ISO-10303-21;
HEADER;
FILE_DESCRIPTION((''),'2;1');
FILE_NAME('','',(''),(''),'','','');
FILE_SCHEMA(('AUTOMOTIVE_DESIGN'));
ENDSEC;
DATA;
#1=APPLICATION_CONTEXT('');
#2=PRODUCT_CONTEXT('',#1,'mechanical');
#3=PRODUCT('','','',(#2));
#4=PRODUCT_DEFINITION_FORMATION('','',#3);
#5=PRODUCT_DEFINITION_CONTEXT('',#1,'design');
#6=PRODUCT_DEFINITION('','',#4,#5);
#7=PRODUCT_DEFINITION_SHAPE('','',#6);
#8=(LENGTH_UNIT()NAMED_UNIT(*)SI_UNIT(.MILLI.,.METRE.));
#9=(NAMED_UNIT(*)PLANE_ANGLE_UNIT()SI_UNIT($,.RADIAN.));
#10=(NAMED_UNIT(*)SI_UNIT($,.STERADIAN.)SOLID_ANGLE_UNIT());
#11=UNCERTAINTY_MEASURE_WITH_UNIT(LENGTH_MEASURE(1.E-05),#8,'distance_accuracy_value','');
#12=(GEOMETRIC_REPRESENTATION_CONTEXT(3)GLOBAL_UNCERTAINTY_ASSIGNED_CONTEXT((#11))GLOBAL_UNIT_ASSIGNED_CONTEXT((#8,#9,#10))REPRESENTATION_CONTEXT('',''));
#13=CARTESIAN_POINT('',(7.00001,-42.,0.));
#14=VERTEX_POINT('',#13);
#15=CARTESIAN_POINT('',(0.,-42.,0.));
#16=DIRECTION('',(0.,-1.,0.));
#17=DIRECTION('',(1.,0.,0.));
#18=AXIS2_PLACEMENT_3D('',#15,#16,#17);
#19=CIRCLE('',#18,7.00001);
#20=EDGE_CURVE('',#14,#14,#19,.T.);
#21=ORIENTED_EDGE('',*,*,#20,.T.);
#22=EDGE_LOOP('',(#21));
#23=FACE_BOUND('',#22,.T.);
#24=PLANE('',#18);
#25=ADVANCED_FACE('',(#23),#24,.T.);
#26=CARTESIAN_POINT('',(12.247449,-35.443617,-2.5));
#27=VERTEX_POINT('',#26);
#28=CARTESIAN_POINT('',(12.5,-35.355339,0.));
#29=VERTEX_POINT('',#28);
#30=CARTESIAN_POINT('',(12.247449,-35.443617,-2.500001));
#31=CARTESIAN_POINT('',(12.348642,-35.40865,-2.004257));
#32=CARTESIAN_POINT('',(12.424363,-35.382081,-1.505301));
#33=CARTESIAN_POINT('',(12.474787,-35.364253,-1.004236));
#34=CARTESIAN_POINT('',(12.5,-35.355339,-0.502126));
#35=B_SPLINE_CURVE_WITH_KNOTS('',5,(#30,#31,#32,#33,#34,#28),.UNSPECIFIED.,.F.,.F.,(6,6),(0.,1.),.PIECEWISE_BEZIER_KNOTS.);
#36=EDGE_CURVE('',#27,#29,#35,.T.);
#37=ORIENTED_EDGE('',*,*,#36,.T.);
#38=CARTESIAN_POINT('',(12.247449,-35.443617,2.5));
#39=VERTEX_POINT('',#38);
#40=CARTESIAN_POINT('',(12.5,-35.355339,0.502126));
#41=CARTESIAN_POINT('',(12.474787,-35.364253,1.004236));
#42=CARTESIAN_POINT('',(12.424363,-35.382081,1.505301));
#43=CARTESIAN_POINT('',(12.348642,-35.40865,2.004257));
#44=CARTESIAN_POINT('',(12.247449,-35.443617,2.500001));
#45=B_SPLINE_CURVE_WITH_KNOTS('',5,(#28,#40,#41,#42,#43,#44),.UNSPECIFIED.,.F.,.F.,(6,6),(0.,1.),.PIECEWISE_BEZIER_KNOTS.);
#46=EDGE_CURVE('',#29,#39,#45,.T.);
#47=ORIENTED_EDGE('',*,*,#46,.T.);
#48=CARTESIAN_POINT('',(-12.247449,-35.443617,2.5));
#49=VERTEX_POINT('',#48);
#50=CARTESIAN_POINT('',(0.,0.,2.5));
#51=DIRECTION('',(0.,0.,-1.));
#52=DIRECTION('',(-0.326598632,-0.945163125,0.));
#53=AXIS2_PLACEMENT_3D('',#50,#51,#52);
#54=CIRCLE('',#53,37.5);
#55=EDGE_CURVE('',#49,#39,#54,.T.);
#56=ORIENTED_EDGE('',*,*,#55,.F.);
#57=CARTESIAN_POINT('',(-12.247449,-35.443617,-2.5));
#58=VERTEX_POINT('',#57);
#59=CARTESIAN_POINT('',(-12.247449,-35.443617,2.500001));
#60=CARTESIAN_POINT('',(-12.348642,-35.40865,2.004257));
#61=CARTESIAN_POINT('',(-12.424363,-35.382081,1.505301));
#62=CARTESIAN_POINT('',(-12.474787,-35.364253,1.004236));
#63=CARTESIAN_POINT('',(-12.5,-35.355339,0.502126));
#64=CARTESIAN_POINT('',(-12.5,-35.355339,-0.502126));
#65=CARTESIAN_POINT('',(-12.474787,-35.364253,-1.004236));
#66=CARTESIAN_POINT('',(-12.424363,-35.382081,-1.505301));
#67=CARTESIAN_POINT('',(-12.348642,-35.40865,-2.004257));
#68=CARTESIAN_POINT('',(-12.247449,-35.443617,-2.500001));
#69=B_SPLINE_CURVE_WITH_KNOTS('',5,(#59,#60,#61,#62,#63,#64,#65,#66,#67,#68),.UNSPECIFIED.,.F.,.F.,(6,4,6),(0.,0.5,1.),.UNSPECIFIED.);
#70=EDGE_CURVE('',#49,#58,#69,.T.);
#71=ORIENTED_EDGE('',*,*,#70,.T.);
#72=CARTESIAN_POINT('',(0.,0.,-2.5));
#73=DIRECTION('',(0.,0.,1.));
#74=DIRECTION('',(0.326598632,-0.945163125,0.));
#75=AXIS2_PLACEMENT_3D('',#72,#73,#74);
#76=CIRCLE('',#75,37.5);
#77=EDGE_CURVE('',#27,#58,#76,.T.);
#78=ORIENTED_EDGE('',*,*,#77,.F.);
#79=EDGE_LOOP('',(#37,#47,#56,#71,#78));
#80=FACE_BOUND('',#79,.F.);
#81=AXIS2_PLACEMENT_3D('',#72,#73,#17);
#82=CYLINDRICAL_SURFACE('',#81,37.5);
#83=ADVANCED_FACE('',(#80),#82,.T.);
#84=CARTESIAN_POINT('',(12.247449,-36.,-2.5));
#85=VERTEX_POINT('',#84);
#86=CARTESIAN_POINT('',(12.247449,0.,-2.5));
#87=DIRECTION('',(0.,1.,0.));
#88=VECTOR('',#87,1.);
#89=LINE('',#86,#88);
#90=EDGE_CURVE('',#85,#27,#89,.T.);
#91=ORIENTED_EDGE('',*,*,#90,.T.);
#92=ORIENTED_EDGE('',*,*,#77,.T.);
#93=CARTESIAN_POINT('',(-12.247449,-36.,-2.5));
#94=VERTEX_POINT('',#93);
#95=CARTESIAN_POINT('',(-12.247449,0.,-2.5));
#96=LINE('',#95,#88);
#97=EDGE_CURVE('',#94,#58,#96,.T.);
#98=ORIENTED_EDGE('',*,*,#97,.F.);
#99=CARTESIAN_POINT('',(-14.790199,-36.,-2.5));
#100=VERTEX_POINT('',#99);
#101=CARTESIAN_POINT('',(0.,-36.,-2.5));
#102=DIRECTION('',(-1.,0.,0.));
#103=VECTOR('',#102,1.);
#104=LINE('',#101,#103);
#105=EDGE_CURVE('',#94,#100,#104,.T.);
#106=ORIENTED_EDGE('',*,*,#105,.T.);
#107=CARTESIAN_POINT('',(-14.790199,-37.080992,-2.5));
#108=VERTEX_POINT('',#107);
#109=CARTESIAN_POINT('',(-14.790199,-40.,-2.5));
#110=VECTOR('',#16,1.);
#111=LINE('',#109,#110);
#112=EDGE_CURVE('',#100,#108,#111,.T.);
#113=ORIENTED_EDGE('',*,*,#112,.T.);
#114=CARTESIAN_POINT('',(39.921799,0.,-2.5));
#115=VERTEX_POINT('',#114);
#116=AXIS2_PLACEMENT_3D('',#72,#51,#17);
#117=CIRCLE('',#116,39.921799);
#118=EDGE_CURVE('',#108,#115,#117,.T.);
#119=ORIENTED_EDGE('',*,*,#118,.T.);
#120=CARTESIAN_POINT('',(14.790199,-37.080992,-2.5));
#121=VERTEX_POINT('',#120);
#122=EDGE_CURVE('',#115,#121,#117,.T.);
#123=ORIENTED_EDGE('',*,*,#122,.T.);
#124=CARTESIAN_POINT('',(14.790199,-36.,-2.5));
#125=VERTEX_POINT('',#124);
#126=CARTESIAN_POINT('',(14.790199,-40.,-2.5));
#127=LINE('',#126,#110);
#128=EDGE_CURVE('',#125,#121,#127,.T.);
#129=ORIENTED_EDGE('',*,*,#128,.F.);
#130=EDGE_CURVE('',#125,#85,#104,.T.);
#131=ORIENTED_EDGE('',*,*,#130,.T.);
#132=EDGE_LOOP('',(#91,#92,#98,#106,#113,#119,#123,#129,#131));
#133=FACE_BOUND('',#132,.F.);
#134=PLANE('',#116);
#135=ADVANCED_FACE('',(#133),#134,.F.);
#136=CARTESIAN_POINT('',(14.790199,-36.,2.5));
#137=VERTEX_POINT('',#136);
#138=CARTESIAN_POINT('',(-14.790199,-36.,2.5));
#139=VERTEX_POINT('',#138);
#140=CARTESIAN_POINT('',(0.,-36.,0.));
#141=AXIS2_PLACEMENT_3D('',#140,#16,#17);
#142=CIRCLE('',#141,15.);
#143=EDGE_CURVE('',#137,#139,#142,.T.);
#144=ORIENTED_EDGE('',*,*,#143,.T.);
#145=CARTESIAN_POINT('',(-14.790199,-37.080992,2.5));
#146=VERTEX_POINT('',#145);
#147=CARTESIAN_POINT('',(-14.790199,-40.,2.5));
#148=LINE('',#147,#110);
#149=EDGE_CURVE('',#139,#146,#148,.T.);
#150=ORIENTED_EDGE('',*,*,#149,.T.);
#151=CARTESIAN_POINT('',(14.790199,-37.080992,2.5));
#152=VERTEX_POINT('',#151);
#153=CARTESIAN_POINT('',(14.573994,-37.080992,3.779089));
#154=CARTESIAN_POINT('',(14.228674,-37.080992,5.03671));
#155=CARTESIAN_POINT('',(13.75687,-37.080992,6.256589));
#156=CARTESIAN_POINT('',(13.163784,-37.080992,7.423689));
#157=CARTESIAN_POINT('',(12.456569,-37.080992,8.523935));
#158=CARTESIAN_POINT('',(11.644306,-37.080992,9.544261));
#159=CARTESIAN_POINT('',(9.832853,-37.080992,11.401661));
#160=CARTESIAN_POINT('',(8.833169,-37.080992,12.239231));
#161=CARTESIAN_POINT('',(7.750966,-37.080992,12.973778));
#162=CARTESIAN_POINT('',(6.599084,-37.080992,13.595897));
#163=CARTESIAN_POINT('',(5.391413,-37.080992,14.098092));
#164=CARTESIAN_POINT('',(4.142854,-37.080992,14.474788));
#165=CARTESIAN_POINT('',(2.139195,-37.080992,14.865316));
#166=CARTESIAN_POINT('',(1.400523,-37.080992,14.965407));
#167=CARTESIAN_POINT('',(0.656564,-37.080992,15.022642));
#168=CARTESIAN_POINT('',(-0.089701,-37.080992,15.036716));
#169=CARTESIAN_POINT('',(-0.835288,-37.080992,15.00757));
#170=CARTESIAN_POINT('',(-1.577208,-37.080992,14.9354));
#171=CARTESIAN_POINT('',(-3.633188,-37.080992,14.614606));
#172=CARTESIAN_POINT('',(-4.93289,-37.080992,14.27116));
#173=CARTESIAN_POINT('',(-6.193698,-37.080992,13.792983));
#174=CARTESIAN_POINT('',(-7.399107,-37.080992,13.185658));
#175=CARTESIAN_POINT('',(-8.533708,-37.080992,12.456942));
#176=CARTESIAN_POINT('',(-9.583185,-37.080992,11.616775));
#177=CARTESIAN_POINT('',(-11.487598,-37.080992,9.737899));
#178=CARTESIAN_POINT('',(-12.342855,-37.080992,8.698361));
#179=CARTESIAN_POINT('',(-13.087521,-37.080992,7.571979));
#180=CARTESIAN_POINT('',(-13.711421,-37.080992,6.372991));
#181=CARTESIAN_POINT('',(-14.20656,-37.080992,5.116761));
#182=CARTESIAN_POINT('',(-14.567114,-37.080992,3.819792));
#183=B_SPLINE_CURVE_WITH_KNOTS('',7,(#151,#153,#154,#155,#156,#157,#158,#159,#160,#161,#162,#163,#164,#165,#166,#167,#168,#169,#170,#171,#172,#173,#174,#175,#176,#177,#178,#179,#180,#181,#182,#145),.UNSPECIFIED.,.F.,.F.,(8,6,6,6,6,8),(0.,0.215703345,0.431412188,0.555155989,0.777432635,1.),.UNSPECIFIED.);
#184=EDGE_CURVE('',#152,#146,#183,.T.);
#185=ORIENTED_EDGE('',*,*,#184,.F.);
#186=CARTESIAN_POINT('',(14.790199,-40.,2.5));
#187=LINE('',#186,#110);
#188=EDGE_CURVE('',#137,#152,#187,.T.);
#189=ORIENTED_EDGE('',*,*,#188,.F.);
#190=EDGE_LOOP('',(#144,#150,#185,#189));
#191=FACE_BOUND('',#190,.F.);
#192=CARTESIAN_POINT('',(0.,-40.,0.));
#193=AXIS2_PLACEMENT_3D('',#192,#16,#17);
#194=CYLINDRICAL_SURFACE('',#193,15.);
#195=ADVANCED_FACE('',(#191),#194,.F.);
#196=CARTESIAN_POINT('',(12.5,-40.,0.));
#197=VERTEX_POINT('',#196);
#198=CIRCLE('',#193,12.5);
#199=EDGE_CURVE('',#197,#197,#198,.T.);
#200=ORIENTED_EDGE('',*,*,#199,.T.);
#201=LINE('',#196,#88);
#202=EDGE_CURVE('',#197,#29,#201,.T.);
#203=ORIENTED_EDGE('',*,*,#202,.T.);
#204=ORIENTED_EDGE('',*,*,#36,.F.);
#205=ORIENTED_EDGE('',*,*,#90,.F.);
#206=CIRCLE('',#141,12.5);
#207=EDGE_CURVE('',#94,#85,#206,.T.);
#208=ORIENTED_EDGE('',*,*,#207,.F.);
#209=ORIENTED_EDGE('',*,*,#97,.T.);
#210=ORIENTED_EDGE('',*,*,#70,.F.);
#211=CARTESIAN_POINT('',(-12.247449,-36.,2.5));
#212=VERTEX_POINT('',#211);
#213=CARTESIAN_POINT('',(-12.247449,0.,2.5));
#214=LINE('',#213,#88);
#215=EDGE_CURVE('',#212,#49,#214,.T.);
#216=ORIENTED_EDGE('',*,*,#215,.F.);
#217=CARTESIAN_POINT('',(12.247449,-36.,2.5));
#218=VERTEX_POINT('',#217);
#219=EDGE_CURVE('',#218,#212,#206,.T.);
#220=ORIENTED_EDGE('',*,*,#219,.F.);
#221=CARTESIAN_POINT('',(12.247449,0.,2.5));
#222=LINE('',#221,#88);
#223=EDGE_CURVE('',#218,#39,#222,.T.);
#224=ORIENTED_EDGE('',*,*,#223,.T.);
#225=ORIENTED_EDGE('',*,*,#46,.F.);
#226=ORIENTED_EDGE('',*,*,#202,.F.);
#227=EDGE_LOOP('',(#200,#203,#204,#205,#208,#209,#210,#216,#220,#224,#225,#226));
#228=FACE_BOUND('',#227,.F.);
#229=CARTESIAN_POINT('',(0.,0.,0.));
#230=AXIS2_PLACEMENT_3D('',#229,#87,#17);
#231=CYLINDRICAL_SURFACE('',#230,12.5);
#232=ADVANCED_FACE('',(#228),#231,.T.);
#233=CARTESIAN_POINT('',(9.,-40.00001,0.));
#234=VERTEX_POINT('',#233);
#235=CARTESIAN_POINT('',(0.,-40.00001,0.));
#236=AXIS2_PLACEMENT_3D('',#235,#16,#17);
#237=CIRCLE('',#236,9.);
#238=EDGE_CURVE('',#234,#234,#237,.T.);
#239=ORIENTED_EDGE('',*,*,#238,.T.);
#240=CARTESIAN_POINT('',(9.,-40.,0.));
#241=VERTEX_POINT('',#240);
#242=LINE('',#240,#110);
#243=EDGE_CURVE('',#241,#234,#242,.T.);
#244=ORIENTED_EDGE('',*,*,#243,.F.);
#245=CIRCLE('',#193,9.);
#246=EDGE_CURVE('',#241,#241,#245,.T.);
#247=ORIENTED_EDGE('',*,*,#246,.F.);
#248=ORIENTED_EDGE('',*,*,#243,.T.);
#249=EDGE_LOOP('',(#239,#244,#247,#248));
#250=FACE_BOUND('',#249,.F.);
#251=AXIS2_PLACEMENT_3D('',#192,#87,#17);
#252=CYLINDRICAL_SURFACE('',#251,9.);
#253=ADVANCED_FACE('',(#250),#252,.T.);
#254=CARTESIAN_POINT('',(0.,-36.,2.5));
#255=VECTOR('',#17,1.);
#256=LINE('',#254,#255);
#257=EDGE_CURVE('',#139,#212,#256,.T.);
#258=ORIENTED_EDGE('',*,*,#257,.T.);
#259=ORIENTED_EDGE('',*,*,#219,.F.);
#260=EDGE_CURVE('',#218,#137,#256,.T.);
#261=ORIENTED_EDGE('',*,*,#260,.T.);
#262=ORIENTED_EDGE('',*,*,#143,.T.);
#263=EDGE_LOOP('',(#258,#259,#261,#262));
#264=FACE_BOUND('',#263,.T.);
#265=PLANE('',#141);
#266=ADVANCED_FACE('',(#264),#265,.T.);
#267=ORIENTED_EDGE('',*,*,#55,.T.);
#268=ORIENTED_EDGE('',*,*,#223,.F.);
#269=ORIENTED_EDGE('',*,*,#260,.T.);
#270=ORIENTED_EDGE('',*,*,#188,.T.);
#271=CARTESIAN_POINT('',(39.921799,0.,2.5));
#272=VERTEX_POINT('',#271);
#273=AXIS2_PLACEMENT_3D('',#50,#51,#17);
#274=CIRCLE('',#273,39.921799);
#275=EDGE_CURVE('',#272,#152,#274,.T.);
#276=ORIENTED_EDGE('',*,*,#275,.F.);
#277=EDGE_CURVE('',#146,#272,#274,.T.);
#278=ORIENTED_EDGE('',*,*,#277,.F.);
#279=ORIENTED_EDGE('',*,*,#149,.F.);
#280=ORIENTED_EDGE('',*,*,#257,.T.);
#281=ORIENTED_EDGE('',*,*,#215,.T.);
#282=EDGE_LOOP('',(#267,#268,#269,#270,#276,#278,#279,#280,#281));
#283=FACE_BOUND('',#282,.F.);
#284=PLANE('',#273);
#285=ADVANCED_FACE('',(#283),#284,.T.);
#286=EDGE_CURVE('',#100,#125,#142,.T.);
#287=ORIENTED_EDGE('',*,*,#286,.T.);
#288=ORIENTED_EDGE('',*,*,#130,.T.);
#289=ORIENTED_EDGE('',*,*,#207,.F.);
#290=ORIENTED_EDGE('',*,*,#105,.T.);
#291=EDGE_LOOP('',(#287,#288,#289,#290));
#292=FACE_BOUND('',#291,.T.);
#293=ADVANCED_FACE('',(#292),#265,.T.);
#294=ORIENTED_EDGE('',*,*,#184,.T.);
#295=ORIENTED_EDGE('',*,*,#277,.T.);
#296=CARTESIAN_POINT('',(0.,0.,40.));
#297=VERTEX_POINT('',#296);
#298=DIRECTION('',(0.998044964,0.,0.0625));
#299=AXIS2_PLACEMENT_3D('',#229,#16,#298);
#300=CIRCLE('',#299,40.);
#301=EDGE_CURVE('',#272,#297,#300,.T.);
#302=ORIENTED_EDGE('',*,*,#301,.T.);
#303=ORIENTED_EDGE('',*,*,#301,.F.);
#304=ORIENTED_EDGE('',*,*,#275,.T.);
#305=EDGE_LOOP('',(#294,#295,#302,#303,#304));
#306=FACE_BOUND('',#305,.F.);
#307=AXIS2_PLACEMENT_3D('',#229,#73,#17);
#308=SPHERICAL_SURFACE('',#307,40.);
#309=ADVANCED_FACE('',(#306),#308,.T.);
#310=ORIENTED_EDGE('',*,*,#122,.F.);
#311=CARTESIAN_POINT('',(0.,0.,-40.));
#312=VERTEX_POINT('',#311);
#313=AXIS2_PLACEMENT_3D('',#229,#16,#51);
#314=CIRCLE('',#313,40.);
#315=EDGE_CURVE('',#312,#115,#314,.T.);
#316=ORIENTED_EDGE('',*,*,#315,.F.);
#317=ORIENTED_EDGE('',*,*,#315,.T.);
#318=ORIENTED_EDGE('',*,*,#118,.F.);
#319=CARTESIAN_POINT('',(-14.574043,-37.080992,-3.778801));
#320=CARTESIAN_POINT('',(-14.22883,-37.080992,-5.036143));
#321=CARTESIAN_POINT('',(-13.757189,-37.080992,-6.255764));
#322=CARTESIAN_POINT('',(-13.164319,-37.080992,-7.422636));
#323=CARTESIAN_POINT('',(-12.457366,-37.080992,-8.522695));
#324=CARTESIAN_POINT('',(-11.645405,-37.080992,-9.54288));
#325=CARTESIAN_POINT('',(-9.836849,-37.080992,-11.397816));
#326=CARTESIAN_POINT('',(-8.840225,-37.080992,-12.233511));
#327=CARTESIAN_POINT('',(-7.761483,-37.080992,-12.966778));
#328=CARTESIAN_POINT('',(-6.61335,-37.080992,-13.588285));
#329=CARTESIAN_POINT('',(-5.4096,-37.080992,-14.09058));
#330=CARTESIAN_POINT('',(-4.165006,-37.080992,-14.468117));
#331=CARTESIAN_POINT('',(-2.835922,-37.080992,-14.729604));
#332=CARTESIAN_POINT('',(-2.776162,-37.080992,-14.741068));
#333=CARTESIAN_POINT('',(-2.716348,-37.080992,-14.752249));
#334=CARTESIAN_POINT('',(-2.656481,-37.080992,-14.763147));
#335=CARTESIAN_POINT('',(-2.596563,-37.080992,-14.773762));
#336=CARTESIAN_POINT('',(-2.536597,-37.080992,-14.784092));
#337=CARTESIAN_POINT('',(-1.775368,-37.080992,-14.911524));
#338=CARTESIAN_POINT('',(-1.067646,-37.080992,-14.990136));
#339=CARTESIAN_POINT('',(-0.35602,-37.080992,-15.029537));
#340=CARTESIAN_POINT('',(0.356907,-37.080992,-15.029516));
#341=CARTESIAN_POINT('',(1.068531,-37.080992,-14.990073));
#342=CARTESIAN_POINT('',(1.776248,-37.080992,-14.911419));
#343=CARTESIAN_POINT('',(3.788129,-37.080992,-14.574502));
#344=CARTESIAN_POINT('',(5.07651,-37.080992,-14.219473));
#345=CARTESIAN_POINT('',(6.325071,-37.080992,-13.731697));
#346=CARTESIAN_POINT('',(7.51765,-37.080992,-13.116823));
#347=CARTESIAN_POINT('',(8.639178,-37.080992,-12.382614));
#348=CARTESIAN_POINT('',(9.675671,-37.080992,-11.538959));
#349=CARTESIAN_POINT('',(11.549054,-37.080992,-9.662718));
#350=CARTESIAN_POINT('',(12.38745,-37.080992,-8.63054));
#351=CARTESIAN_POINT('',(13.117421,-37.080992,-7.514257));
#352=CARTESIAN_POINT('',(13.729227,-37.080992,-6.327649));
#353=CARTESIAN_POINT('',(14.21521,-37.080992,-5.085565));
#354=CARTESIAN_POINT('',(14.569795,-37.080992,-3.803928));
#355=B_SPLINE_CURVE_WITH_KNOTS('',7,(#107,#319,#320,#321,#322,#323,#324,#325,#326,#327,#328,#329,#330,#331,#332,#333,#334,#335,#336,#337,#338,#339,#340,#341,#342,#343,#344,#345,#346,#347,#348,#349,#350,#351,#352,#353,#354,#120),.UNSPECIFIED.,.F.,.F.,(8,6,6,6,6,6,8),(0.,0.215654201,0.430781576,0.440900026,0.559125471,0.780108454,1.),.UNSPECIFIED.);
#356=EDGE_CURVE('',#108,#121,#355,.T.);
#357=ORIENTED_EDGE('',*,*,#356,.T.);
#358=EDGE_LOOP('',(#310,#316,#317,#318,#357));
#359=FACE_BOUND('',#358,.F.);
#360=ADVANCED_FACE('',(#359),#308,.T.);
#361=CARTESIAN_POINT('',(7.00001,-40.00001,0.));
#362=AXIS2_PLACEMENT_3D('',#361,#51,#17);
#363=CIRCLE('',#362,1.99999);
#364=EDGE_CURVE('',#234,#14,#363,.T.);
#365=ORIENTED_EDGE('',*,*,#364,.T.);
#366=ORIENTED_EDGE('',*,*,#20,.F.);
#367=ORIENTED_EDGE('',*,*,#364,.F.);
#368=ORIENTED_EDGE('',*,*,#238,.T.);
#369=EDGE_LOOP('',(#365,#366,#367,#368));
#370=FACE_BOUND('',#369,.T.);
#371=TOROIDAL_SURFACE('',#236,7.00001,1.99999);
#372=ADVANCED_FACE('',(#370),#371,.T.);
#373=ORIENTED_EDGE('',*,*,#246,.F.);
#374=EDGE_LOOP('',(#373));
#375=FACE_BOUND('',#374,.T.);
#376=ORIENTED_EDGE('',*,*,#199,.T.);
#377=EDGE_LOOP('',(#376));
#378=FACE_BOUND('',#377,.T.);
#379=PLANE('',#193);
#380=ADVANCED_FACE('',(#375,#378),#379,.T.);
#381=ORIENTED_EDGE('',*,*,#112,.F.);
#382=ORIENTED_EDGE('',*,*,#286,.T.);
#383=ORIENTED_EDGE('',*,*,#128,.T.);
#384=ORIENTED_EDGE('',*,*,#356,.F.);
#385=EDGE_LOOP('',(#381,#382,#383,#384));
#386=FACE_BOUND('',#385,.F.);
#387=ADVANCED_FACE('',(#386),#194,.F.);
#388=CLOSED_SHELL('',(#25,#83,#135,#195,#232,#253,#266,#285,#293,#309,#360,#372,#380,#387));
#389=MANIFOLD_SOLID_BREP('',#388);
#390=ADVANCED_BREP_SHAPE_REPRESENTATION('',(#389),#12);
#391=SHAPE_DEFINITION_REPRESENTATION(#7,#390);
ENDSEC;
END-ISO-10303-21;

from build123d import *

# Parameters (mm, degrees)
F2_R     = 12.5
F3_DEPTH = 40
F4_R     = 15
F4_R_2   = 12.5
F5_DEPTH = 4
F6_R     = 9
F7_DEPTH = 2
F8_R     = 1.99999


# Not quite as in the source:
# - a fillet or chamfer is up to 0.001 mm smaller than in the source, because OpenCascade refuses the exact size


with BuildPart() as f1:
    # F0 (on Front) → F1 (revolve)
    with BuildSketch(Plane.XZ):
        with BuildLine():
            Line((0, 40), (0, -40))
            ThreePointArc((0, -40), (27.3861278753, -29.1547594742), (39.9217985567, -2.5))
            Line((39.9217985567, -2.5), (37.5, -2.5))
            Line((37.5, -2.5), (37.5, 0))
            Line((37.5, 0), (37.5, 2.5))
            Line((37.5, 2.5), (39.9217985567, 2.5))
            ThreePointArc((39.9217985567, 2.5), (27.3861278753, 29.1547594742), (0, 40))
        make_face()
    revolve(axis=Axis((0, 0, 0), (0, 0, -1)))

    # F2 (on Front) → F3 (join)
    with BuildSketch(Plane.XZ):
        Circle(F2_R)
    extrude(amount=F3_DEPTH)

    # F4 (on face) → F5 (cut)
    with BuildSketch(Plane.XZ.offset(40)):
        Circle(F4_R)
        Circle(F4_R_2, mode=Mode.SUBTRACT)
    extrude(amount=-F5_DEPTH, mode=Mode.SUBTRACT)

    # F6 (on face) → F7 (join)
    with BuildSketch(Plane.XZ.offset(40)):
        Circle(F6_R)
    extrude(amount=F7_DEPTH)

    # F8 (radius 2 in the source; OpenCascade refuses exactly that, so slightly less here)
    f8_edges = [f1.edges().sort_by_distance(p)[0] for p in [
        (-9, -42, 0),
    ]]
    fillet(f8_edges, radius=F8_R)


solid = f1.part
